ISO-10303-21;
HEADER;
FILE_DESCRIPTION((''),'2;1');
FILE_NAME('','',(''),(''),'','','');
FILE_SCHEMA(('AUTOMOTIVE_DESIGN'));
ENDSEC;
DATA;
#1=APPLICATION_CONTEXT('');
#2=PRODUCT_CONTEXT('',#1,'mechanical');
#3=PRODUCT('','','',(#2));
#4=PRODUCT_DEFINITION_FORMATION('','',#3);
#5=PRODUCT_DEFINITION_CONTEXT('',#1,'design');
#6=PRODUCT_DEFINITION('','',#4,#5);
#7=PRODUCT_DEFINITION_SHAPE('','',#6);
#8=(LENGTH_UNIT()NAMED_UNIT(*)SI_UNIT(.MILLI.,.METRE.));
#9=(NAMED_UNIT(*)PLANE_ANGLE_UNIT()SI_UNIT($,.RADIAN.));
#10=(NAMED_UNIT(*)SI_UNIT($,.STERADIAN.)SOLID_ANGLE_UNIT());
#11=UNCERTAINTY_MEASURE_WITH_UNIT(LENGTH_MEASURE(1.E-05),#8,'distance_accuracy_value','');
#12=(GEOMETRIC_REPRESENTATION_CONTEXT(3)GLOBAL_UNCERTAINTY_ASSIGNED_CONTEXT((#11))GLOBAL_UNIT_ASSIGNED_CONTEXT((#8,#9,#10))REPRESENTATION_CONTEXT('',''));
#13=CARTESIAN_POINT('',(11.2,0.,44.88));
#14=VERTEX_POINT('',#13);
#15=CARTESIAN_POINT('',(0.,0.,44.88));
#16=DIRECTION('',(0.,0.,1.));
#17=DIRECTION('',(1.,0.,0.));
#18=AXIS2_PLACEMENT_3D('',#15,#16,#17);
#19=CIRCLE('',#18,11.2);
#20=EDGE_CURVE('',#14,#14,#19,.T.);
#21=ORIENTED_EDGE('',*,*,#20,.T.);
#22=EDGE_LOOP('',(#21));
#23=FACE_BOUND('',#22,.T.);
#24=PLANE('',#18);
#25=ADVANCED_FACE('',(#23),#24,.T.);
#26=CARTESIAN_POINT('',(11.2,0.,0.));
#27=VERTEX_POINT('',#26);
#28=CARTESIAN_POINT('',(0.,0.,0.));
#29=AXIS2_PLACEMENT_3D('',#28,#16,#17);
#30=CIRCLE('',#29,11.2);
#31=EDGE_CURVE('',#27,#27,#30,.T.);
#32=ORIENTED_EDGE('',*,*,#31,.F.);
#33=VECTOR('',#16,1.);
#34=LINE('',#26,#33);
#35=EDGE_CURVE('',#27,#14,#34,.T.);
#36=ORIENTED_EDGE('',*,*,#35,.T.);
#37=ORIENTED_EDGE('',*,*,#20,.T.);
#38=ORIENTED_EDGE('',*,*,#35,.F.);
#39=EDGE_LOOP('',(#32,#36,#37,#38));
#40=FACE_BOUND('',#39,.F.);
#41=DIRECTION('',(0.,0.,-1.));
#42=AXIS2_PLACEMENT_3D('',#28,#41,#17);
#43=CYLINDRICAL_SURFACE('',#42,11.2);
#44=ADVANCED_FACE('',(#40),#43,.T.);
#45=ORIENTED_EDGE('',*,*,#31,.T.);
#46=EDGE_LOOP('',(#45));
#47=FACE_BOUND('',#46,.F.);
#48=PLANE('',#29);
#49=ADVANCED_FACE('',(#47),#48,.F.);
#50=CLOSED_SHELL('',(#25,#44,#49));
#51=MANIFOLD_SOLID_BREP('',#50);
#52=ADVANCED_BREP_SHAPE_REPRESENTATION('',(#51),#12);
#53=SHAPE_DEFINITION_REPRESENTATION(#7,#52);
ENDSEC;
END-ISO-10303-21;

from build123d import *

# Parameters (mm, degrees)
F0_R     = 11.2
F0_R_2   = 2.02
F2_DEPTH = 44.88


# Not quite as in the source:
# - the program builds the solid bodies; features that only make, move or delete a surface that nothing else refers to are left out


with BuildPart() as f2:
    # F0 (on Top) → F2 (new body)
    with BuildSketch(Plane.XY):
        Circle(F0_R)
        Circle(F0_R_2, mode=Mode.SUBTRACT)
        Circle(F0_R_2)
    extrude(amount=F2_DEPTH)


solid = f2.part
